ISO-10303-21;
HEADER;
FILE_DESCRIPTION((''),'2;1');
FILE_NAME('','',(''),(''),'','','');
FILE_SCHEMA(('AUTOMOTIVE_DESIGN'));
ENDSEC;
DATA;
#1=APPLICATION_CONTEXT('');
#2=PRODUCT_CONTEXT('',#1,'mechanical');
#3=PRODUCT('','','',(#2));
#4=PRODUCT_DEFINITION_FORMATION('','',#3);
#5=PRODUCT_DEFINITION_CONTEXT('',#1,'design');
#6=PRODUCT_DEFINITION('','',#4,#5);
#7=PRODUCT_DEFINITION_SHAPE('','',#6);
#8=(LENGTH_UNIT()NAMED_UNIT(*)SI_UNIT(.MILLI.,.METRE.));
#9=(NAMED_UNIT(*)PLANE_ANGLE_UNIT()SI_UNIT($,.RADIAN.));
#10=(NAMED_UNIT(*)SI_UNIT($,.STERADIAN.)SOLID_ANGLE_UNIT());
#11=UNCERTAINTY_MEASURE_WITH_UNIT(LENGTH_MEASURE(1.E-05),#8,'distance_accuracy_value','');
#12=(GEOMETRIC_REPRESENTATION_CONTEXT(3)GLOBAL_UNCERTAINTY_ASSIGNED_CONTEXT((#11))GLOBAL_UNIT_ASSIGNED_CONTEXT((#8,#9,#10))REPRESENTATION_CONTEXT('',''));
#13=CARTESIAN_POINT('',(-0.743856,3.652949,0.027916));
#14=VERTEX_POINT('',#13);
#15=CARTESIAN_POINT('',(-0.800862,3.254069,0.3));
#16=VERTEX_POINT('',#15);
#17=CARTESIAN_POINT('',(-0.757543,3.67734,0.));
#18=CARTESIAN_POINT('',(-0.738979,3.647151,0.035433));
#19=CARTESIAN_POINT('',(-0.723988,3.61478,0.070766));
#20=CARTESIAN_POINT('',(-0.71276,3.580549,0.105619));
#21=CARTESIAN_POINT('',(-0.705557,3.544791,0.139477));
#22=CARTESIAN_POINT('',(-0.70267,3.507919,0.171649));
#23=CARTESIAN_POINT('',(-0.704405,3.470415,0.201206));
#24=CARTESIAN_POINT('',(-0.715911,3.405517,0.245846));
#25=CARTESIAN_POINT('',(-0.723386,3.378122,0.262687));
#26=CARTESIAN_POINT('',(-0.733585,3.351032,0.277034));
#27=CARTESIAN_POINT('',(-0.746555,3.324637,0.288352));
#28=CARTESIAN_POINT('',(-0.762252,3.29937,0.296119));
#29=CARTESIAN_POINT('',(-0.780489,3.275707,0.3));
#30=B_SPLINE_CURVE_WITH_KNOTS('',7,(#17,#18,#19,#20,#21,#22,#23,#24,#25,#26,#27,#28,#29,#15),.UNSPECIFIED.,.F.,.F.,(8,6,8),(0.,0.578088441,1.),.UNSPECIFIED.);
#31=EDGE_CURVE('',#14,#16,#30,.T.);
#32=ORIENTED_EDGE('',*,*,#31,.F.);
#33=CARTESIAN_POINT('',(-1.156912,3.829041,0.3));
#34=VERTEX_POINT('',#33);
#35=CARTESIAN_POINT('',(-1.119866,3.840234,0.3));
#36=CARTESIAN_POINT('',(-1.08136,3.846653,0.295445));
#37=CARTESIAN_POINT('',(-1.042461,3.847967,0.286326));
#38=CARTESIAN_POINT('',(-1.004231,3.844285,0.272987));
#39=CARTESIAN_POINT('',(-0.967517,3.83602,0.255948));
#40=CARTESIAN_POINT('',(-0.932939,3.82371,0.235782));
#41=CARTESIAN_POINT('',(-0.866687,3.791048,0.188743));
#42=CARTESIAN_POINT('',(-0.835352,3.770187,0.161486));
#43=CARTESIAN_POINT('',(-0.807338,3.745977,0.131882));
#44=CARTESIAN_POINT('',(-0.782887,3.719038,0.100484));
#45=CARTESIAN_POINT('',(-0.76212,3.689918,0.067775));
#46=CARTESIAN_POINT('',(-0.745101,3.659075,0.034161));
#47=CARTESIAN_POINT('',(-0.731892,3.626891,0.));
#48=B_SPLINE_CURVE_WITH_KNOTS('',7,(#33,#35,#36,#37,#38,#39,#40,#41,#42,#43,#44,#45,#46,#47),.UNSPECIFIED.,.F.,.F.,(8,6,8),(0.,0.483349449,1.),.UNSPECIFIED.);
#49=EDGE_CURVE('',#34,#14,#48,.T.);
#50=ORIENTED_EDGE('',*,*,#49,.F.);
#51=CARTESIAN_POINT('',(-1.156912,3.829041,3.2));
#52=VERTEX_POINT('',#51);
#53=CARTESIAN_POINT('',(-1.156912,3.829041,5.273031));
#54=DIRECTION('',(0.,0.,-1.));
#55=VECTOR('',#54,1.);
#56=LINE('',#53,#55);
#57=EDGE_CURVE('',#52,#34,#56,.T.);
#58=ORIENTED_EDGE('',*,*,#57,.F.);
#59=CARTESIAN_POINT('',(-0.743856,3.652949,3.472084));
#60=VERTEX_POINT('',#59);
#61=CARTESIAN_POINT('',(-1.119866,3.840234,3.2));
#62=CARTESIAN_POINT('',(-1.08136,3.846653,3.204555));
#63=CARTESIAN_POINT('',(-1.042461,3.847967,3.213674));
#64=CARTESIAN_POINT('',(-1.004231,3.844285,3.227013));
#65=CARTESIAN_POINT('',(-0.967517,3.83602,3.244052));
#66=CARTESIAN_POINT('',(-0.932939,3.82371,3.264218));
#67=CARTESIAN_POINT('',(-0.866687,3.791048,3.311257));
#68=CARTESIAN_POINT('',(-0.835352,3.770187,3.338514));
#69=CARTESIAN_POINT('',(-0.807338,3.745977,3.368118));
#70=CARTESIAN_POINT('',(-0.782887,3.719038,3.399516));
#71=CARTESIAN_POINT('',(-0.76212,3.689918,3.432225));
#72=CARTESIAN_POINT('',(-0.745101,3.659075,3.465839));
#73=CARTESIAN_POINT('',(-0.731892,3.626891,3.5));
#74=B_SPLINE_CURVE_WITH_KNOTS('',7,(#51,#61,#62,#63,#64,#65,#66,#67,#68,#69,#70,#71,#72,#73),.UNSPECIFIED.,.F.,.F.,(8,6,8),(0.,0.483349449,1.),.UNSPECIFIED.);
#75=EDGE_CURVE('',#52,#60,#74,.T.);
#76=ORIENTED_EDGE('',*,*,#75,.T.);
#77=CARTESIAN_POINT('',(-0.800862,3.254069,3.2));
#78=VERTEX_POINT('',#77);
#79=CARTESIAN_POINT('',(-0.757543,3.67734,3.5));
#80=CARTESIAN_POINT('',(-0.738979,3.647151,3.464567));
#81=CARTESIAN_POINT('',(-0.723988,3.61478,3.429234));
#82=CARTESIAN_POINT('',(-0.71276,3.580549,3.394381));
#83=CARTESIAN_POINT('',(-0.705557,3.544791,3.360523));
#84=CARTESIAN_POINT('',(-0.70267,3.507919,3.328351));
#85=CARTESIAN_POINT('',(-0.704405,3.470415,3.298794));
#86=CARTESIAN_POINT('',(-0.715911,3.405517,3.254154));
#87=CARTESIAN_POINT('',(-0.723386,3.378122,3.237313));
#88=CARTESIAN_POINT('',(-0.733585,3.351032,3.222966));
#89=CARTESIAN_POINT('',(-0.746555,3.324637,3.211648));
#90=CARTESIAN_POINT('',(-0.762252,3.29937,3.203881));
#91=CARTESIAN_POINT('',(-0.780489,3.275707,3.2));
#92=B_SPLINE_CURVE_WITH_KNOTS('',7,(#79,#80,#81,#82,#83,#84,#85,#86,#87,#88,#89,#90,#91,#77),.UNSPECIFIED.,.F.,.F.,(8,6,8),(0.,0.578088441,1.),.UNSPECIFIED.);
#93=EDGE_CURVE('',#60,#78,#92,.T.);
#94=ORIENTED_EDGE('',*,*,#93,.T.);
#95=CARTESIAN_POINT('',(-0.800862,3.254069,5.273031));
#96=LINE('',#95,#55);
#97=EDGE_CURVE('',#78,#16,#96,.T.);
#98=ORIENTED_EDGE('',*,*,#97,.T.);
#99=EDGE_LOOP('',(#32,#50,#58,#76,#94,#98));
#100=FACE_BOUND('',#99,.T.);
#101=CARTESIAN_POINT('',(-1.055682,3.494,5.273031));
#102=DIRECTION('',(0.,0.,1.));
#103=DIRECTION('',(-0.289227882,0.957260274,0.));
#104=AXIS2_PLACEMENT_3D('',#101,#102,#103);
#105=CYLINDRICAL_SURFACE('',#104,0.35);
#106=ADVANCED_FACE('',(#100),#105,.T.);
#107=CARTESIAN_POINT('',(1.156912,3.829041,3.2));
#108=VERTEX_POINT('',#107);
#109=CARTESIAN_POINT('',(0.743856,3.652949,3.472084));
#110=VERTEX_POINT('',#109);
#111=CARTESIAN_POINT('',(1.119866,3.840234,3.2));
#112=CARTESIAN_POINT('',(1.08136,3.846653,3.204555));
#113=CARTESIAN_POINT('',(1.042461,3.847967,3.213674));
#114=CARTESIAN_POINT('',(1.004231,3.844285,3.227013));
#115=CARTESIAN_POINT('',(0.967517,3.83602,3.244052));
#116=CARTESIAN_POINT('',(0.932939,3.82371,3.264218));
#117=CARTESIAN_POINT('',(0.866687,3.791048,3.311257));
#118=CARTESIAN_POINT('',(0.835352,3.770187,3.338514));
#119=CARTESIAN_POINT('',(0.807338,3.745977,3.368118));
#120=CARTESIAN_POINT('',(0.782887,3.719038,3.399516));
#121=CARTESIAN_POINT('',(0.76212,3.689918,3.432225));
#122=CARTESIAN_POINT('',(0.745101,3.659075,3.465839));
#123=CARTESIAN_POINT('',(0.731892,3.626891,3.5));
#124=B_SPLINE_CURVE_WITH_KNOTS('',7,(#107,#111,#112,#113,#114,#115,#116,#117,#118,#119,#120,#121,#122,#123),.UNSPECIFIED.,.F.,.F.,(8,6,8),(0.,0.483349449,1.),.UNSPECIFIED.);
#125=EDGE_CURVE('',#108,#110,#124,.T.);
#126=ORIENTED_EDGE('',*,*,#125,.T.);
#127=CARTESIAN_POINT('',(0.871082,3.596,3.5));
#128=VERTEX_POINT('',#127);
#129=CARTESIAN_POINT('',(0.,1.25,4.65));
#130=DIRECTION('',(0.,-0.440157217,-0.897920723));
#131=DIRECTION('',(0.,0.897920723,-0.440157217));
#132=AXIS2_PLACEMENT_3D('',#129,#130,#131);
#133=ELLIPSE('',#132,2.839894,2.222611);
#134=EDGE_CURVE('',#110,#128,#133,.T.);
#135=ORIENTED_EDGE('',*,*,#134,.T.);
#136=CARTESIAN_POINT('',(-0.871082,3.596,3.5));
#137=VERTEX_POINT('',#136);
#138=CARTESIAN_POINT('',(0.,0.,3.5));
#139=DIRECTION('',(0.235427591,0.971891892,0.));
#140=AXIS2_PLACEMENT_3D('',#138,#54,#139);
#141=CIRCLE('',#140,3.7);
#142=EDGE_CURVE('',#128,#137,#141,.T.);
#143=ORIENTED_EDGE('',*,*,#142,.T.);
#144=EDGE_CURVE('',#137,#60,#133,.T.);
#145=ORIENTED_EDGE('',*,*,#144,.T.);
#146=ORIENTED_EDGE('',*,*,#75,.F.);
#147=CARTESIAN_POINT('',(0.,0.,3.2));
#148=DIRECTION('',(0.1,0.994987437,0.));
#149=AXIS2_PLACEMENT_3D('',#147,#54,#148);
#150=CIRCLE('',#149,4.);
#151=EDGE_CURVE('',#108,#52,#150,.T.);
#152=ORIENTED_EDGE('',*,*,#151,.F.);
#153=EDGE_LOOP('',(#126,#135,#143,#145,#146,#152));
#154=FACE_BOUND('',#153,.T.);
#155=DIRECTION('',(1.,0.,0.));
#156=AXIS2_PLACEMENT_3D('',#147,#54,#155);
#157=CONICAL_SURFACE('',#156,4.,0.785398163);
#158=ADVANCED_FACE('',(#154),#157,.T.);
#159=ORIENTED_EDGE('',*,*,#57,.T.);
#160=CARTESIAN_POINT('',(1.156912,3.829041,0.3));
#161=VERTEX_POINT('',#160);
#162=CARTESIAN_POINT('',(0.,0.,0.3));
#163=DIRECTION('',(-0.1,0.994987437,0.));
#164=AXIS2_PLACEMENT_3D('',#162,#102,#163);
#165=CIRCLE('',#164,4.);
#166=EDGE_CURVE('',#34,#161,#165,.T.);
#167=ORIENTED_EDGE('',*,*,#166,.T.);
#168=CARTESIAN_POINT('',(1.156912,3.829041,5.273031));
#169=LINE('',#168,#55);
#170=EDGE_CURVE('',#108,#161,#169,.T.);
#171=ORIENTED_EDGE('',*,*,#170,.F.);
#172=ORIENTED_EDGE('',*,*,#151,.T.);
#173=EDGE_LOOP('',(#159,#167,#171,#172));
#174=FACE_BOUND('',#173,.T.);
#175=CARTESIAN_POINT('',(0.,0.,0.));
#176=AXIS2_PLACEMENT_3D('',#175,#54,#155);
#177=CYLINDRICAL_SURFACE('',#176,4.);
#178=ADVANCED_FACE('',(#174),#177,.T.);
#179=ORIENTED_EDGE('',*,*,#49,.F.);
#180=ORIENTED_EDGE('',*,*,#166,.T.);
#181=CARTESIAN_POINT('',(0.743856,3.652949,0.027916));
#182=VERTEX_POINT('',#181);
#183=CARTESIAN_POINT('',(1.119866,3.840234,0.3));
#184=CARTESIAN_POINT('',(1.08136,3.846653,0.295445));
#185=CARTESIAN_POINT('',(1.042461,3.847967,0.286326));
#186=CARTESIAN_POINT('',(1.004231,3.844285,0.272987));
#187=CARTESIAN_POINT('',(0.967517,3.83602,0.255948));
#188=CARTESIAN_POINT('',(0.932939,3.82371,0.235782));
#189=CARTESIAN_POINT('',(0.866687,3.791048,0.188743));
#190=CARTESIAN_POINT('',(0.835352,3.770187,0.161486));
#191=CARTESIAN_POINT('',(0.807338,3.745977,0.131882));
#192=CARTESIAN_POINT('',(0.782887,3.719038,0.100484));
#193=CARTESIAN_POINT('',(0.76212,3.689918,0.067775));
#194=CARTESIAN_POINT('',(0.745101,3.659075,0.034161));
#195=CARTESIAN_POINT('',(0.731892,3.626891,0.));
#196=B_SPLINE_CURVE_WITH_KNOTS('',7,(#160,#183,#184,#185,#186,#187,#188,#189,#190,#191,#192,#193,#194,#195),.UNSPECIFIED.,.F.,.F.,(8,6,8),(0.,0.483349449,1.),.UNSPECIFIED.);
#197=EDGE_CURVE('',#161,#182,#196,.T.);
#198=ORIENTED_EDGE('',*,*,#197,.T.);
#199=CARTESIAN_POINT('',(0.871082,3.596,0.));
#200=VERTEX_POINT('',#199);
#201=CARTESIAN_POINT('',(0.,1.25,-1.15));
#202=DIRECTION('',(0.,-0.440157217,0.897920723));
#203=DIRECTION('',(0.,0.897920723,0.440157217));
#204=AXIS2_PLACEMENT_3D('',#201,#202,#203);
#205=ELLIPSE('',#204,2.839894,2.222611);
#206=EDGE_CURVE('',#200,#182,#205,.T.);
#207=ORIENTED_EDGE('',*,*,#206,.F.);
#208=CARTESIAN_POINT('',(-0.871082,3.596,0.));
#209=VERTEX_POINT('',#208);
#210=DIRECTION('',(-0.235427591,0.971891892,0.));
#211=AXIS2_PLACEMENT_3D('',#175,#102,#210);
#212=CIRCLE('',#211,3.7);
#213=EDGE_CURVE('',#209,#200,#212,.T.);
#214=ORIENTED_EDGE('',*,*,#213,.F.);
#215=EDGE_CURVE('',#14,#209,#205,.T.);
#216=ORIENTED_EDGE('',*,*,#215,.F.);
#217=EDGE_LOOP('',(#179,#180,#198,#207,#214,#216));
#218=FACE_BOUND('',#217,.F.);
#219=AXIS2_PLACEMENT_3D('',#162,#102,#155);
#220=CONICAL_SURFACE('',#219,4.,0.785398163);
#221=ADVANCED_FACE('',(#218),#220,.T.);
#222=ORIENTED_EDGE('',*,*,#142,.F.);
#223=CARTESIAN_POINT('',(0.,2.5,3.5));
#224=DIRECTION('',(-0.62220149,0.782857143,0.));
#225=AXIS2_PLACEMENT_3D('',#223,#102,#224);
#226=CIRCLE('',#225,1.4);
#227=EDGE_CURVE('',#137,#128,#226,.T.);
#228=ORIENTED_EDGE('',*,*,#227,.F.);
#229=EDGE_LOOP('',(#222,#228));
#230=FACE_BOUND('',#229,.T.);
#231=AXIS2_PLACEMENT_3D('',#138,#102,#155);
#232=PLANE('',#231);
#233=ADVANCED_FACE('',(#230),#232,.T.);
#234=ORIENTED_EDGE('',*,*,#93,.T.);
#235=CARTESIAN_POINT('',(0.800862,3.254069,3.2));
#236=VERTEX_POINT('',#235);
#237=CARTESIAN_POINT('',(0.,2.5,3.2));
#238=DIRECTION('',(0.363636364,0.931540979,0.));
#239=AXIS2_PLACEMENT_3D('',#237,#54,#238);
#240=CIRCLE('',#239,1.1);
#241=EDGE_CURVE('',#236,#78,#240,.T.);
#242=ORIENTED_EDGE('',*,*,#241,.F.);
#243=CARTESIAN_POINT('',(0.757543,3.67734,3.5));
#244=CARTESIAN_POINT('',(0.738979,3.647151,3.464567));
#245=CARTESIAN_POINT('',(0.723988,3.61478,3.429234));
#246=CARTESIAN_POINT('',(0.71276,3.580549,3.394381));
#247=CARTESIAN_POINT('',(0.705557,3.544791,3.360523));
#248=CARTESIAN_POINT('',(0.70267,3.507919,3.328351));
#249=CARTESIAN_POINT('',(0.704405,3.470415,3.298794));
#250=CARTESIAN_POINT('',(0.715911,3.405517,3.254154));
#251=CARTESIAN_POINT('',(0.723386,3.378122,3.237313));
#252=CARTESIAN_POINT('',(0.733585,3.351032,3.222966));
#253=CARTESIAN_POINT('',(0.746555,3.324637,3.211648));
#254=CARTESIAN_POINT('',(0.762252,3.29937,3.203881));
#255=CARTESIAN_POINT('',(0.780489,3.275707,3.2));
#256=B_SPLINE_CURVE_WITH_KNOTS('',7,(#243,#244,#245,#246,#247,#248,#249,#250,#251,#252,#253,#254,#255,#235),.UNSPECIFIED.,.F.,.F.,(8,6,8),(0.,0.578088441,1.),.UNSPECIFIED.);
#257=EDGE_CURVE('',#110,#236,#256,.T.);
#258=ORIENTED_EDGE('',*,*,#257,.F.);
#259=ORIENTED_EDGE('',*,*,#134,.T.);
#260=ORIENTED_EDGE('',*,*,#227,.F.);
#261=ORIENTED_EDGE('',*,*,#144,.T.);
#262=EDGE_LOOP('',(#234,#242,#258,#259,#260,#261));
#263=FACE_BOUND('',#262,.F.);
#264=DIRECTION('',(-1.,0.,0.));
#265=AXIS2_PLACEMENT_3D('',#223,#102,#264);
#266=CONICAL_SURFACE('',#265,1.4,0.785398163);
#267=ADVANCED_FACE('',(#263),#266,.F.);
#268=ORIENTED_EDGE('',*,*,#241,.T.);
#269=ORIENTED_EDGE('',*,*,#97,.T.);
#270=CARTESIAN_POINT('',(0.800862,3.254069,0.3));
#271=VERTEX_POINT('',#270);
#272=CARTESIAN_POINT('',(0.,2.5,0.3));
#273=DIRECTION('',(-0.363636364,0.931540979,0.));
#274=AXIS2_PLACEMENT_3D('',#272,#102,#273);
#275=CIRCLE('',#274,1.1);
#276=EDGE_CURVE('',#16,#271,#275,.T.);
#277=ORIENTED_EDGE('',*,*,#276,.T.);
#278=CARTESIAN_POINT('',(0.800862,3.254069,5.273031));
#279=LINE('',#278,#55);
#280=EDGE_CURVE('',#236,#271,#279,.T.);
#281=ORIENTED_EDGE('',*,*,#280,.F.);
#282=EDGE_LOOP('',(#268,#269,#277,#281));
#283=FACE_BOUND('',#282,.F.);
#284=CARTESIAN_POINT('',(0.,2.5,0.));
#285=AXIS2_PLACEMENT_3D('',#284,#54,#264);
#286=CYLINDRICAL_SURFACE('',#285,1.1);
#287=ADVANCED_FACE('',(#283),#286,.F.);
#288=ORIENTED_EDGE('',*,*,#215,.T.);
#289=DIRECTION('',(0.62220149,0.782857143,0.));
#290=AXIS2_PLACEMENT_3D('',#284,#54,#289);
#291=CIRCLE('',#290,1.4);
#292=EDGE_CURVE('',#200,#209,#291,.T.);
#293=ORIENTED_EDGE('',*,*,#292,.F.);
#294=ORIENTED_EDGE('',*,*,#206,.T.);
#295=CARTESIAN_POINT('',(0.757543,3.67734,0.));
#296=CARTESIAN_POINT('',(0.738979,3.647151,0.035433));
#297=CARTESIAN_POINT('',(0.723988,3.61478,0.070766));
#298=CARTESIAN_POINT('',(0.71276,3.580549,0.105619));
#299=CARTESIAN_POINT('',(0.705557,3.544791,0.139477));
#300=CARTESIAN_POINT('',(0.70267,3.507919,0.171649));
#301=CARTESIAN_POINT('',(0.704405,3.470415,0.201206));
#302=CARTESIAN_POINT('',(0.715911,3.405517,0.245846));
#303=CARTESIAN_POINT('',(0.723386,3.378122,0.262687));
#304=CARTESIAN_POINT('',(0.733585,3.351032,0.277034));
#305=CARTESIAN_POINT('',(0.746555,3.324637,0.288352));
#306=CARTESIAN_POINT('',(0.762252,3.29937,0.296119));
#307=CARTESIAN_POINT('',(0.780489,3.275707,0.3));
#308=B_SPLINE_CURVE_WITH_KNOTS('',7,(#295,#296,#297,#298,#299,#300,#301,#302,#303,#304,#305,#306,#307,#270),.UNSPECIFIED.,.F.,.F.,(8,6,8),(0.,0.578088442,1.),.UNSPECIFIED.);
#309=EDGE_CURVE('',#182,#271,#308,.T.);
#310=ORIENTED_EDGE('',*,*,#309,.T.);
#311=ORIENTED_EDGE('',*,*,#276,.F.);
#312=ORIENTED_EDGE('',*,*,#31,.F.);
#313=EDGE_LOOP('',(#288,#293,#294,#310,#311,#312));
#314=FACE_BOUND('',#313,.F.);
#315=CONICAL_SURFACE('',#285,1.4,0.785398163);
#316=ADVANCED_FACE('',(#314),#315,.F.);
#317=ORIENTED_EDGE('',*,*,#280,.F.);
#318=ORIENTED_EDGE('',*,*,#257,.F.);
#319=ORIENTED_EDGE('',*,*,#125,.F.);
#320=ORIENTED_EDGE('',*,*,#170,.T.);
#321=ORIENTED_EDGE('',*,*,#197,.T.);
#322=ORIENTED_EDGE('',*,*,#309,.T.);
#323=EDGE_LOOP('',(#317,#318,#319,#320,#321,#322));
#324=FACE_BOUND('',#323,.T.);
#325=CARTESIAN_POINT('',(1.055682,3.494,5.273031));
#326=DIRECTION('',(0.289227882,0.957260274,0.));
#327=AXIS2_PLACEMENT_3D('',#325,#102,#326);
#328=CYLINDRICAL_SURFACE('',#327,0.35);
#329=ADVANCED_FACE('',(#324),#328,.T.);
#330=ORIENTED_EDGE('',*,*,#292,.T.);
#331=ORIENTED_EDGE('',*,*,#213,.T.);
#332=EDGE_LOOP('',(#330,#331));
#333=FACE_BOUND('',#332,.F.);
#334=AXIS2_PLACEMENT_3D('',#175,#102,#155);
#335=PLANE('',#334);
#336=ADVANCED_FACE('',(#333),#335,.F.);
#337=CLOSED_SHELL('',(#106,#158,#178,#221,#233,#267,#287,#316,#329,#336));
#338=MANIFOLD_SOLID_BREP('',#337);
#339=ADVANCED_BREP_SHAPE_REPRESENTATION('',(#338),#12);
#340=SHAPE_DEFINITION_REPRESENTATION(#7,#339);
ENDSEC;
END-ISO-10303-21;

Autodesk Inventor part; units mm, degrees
ref_plane "YZ Plane" through (0, 0, 0) normal (1, 0, 0) x (0, 1, 0)
ref_plane "XZ Plane" through (0, 0, 0) normal (0, 1, 0) x (-1, 0, 0)
ref_plane "XY Plane" through (0, 0, 0) normal (0, 0, 1) x (1, 0, 0)
sketch "Sketch1" plane through (0, 0, 0) normal (0, 0, 1) x (1, 0, 0)
  circle A0 centre (0, 0) radius 4
  dimension "d0" = 8
extrude "Extrusion1" add sketch "Sketch1" along normal blind 3.5
sketch "Sketch4" plane through (0, 0, 0) normal (0, 0, -1) x (-1, 0, 0)
  line L0 (0, 0) -> (0, 2.5)
  circle A0 centre (0, 2.5) radius 1.1
  dimension "d9" = 2.5
  dimension "d10" = 2.2
extrude "Extrusion3" cut sketch "Sketch4" against normal through all
chamfer "Chamfer1" distance 0.3 angle 45 4 edges at (-4, 0, 3.5) (-4, 0, 0) (1.1, 2.5, 0) (1.1, 2.5, 3.5)
sketch "Sketch5" plane through (0, 0, 3.5) normal (0, 0, 1) x (1, 0, 0)
  line L0 (-0.4, 4.2659) -> (0.4, 4.2659)
  line L1 (0.4, 4.2659) -> (0.4, 2.9071)
  line L2 (0.4, 2.9071) -> (-0.4, 2.9071)
  line L3 (-0.4, 2.9071) -> (-0.4, 4.2659)
  circle A0 centre (0, 2.5) radius 1.1 construction
  point P0 (0, 0)
  dimension "d16" = 0.4
  dimension "d17" = 0.4
extrude "Extrusion4" cut sketch "Sketch5" against normal through all
fillet "Fillet1" radius 0.35 4 edges at (-0.4, 3.5247, 1.75) (-0.4, 3.9799, 1.75) (0.4, 3.5247, 1.75) (0.4, 3.9799, 1.75)
equation "\"d17\" = d16"
properties part number "CamShaft"
